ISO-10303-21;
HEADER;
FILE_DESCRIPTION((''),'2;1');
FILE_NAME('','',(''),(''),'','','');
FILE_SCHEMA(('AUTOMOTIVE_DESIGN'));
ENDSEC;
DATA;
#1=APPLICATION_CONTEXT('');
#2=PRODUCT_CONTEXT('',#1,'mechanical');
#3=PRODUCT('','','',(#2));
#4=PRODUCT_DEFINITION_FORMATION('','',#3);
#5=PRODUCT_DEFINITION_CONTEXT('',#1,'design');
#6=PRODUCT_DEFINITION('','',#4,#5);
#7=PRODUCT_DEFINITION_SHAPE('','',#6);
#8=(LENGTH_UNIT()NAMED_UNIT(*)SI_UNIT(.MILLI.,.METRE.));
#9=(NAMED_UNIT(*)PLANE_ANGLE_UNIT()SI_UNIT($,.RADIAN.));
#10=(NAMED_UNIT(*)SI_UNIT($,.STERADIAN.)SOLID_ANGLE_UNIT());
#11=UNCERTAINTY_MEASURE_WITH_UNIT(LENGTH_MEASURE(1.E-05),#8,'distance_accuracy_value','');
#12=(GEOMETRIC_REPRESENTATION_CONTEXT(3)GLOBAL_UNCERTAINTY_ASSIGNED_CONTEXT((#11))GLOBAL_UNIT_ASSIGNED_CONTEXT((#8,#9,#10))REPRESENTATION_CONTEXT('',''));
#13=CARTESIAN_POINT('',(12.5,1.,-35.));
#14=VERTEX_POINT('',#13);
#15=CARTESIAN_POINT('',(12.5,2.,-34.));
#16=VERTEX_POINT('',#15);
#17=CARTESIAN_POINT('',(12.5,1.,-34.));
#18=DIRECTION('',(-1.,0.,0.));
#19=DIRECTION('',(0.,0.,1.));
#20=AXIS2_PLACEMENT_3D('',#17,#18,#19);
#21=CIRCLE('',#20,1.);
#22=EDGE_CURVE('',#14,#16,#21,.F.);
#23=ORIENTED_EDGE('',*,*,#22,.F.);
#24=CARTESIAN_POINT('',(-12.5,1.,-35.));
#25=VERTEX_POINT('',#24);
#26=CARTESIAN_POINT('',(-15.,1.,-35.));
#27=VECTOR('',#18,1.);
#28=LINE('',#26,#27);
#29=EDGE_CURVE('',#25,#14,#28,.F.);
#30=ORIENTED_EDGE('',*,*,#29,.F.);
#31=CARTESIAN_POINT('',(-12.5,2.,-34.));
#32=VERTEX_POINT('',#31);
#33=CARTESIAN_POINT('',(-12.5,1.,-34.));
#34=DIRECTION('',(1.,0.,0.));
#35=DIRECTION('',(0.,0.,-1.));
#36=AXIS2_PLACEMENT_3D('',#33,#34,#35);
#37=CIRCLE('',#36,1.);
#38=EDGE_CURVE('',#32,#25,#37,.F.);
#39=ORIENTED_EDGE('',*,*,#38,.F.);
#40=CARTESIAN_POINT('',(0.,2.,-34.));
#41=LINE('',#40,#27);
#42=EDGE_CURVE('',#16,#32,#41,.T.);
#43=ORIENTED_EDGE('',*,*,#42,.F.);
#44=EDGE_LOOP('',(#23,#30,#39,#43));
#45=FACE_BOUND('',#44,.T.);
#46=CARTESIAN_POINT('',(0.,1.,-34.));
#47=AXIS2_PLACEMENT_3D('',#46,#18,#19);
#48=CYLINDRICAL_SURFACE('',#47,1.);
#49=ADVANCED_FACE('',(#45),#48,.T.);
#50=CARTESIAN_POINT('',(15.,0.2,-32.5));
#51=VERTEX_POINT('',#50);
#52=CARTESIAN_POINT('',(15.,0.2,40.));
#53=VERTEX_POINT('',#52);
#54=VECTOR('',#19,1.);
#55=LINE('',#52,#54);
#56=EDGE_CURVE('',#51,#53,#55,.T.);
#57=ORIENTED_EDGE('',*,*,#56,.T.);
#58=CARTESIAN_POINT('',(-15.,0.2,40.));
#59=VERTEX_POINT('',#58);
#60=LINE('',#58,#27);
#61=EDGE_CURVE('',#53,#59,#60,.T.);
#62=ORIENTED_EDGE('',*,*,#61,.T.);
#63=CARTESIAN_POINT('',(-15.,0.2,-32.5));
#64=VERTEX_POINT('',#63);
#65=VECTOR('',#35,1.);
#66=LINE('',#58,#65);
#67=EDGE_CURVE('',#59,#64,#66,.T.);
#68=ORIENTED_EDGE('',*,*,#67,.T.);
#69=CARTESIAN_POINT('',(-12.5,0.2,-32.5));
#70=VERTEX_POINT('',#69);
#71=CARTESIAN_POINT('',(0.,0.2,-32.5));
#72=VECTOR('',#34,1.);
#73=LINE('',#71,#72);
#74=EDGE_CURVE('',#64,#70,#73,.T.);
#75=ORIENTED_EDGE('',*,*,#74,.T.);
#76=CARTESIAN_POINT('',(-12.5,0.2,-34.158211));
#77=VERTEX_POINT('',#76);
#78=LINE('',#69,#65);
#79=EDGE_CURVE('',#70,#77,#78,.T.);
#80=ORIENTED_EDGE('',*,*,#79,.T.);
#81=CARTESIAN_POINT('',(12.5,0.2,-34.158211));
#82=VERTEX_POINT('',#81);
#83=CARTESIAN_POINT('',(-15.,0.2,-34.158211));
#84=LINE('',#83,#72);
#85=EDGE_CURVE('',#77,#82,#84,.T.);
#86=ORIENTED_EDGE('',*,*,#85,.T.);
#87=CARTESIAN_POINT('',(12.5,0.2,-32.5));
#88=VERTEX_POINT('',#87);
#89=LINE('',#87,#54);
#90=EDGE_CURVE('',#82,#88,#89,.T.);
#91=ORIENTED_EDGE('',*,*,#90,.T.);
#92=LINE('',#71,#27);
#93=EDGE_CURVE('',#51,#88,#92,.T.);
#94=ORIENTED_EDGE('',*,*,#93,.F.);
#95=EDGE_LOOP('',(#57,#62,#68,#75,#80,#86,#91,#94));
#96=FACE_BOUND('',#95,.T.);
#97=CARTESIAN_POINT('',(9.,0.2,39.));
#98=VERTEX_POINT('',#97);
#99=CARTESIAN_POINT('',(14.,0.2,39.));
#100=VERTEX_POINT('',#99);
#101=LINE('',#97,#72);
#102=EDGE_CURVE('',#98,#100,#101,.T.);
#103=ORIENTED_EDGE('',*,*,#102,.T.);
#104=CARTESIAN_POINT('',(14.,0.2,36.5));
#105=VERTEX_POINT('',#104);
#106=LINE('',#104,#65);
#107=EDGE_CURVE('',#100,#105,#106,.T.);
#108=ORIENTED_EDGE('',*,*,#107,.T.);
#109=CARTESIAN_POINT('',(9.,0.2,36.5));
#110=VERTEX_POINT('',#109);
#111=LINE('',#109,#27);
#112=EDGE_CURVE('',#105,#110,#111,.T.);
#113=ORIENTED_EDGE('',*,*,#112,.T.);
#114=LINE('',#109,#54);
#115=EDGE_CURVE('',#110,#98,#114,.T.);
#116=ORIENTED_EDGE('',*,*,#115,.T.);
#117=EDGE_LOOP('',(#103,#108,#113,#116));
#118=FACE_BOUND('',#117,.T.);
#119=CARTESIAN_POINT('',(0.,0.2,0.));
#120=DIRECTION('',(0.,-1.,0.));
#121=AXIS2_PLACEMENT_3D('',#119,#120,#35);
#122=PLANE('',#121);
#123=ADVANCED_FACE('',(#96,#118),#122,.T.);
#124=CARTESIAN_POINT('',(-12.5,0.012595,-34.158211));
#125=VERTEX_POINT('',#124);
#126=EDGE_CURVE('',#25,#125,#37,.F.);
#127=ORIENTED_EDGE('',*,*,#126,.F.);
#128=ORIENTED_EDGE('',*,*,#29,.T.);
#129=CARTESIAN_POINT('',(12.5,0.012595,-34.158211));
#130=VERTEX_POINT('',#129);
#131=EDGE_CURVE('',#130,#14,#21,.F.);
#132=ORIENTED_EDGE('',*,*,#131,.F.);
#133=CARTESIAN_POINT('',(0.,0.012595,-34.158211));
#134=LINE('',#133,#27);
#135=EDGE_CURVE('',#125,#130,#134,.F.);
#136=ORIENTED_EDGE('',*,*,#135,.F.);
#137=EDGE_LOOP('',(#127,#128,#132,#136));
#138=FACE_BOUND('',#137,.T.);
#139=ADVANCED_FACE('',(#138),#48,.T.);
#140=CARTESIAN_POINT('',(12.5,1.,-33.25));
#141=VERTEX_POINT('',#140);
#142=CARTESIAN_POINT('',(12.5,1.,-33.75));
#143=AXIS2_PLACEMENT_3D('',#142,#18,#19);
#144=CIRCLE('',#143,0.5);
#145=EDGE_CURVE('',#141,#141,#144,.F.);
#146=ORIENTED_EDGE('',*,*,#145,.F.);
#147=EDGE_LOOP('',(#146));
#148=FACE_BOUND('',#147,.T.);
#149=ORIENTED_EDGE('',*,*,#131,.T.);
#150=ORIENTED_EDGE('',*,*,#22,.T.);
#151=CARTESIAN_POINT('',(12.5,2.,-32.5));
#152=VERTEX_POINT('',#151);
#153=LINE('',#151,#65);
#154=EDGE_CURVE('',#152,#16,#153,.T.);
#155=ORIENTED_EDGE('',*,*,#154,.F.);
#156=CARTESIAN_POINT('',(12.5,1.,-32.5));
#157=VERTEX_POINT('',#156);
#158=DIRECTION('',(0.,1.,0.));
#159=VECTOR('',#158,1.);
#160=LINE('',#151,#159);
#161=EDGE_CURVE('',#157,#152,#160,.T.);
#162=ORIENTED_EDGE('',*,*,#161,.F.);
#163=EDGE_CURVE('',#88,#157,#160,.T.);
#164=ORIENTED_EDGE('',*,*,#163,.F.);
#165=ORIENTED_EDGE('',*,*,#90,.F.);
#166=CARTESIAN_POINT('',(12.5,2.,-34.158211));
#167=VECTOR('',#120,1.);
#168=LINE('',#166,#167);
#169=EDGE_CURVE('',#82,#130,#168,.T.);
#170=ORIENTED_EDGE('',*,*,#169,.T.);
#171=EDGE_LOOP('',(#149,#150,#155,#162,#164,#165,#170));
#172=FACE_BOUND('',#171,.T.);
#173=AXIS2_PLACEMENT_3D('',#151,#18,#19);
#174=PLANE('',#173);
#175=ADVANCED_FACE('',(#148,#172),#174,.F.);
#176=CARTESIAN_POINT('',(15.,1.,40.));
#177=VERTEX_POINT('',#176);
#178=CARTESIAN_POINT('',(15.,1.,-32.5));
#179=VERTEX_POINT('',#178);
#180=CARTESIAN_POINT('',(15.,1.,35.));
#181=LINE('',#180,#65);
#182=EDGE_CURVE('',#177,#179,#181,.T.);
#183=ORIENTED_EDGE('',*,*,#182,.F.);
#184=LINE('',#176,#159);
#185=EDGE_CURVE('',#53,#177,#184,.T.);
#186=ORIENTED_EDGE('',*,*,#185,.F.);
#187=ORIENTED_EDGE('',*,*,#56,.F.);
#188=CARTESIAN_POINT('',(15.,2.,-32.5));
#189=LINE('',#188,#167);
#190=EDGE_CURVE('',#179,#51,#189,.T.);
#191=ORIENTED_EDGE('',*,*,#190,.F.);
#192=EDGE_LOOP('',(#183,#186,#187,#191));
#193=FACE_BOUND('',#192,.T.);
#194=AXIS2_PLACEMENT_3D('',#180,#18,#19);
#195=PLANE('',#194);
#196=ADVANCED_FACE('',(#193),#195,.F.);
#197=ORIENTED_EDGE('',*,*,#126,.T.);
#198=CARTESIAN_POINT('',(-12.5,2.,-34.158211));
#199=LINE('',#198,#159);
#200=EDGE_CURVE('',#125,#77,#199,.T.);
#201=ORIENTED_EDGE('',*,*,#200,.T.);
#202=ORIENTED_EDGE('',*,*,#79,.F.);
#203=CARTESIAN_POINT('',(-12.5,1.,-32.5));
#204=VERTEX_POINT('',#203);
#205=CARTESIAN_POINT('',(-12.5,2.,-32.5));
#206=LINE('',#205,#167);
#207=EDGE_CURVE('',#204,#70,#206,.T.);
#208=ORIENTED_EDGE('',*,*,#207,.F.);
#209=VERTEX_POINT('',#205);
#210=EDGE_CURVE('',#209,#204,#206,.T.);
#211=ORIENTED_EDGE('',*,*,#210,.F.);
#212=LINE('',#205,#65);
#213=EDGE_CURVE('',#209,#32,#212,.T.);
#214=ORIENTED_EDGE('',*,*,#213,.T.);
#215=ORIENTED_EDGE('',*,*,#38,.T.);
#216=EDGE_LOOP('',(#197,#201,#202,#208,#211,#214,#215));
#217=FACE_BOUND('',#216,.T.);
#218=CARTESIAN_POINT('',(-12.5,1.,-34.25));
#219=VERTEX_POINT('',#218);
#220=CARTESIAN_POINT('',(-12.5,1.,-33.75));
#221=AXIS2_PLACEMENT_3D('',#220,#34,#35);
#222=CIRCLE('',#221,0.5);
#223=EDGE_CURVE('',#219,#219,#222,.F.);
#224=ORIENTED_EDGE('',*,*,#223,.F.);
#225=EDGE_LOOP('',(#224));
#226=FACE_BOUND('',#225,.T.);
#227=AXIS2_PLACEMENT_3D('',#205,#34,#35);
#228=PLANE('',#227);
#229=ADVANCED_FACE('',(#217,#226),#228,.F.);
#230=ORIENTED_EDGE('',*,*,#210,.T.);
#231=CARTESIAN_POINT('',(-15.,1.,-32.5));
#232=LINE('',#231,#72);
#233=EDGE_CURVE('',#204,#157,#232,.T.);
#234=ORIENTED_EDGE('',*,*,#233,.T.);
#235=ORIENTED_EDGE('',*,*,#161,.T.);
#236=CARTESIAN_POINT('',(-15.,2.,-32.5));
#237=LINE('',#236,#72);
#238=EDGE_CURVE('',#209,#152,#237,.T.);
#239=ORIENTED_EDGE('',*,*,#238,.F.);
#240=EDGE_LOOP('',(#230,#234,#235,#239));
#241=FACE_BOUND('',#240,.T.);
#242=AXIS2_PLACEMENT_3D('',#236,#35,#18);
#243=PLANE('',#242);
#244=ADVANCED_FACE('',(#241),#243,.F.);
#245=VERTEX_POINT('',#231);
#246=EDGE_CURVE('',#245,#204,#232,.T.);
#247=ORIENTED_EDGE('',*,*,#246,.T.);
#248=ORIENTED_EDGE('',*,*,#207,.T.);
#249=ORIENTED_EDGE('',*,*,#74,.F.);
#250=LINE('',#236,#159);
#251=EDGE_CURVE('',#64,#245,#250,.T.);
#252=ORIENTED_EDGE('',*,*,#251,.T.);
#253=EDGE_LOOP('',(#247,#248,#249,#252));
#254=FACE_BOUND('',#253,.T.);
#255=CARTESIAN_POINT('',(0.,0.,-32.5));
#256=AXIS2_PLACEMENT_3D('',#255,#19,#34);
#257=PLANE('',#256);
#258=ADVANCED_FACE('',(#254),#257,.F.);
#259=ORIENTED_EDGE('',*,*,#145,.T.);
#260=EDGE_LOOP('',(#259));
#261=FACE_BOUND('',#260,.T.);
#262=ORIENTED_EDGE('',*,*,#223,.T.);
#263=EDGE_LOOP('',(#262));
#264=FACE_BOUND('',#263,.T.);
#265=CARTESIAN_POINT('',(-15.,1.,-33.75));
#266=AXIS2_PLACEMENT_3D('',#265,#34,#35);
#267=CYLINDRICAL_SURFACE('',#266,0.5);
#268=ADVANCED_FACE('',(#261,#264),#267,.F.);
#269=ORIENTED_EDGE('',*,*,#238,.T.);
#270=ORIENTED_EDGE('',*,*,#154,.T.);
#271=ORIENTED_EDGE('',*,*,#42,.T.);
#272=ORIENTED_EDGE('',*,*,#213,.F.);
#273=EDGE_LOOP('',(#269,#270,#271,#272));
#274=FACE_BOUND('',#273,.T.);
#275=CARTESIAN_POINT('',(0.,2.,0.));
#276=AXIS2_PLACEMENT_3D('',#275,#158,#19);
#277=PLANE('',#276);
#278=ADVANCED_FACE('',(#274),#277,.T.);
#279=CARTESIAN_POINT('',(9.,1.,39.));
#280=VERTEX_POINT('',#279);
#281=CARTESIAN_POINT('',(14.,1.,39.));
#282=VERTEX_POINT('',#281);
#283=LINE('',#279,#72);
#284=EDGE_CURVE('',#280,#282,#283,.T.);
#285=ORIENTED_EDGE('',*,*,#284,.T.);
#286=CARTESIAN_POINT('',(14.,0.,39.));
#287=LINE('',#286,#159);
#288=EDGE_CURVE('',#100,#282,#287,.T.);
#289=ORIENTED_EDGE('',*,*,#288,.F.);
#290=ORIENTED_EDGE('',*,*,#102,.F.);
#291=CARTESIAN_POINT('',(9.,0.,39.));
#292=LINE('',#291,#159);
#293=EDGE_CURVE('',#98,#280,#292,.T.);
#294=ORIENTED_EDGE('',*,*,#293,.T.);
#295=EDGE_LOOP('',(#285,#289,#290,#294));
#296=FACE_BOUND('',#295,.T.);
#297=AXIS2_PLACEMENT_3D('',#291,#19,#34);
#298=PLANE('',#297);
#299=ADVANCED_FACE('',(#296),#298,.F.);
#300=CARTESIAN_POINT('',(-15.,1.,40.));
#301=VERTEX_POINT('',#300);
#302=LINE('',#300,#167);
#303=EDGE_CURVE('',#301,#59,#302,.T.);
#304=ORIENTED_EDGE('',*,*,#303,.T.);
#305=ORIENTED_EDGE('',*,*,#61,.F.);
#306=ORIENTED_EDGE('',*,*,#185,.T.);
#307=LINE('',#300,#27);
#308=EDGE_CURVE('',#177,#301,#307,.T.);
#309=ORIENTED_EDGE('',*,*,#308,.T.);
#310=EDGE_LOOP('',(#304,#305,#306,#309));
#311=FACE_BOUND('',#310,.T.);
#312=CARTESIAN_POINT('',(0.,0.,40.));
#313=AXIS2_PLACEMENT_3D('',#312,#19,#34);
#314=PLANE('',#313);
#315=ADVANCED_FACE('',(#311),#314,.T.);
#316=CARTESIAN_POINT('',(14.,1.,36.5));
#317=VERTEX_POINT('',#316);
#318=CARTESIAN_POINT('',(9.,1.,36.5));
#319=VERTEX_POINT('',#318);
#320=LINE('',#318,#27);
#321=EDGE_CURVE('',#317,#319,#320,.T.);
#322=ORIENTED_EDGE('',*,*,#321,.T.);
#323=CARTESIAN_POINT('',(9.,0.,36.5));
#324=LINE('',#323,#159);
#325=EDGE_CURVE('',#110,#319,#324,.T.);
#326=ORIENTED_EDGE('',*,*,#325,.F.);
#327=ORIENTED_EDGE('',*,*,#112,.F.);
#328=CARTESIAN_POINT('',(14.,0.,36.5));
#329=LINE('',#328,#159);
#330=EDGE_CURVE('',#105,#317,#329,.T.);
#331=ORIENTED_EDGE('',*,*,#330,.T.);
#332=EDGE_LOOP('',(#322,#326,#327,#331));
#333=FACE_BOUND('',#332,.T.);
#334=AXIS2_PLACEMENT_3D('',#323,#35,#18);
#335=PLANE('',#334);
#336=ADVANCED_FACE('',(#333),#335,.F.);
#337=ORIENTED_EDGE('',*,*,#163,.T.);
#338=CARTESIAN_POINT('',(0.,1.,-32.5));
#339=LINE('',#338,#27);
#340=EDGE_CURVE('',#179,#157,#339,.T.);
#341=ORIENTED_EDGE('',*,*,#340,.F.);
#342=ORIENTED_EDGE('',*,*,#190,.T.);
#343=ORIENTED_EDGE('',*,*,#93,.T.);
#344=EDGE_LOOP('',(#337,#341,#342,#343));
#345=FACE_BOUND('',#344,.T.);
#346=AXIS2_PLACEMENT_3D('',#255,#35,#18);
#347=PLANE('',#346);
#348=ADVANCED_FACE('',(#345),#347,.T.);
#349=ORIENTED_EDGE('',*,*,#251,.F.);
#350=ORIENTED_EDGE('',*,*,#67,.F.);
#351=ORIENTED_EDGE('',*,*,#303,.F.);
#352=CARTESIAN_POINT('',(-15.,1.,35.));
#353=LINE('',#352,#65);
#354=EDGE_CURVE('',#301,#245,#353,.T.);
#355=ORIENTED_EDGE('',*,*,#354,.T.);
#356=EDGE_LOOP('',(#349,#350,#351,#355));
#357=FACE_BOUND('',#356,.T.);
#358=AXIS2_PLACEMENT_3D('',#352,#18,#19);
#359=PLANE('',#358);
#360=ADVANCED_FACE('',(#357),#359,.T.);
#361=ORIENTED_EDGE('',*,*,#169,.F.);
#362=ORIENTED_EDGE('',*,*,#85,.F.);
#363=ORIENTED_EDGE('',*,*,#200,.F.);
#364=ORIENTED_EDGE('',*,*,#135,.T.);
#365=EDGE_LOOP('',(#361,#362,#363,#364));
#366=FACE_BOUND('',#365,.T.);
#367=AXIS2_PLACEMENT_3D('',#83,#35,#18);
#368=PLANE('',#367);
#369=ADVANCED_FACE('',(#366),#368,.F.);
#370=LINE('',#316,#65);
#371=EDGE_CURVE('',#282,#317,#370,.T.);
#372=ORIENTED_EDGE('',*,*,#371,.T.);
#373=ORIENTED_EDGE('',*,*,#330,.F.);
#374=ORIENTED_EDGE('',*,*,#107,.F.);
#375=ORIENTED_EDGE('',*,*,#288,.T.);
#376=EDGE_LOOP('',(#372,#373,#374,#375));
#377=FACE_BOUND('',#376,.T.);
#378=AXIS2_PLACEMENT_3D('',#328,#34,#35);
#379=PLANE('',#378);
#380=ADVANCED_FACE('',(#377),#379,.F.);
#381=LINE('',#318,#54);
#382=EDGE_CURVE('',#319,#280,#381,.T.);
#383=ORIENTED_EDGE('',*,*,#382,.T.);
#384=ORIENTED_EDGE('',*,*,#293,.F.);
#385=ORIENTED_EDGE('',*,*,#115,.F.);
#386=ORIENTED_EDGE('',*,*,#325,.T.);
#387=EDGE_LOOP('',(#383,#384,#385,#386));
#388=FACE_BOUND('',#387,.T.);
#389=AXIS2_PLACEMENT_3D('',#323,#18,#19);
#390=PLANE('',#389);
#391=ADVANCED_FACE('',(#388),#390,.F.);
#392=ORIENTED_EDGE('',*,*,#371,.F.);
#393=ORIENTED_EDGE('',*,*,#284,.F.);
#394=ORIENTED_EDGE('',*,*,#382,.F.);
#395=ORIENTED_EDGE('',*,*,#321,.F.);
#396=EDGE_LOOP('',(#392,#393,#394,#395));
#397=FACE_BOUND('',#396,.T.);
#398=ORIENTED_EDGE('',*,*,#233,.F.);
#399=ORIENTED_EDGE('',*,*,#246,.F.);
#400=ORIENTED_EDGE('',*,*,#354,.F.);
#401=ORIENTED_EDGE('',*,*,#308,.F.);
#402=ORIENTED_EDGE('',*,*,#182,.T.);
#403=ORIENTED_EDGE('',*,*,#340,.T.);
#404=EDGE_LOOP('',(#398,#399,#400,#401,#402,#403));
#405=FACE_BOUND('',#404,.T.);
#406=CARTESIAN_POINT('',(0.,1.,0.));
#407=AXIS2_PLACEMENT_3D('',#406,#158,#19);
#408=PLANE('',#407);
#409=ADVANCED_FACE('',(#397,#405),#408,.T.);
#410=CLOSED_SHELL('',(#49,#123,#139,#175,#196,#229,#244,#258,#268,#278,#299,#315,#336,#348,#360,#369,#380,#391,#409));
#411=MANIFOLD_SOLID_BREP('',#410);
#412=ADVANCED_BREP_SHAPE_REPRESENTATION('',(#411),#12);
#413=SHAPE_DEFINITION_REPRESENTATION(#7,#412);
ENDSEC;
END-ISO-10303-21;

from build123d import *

# Parameters (mm, degrees)
SKETCH1_W           = 30
SKETCH1_H           = 70
BOSS_EXTRUDE1_DEPTH = 1
SKETCH2_W           = 30
SKETCH2_H           = 2.5
BOSS_EXTRUDE2_DEPTH = 1
SKETCH3_R           = 0.5
CUT_EXTRUDE1_DEPTH  = 30
SKETCH4_W           = 2.5
SKETCH4_H           = 2
CUT_EXTRUDE2_DEPTH  = 2.5
FILLET1_R           = 1
SKETCH5_W           = 30
SKETCH5_H           = 1
BOSS_EXTRUDE3_DEPTH = 5
FILLET2_R           = 1
SKETCH6_W           = 5
SKETCH6_H           = 2.5
CUT_EXTRUDE3_DEPTH  = 1
SKETCH7_W           = 30
SKETCH7_H           = 74.158210877
CUT_EXTRUDE4_DEPTH  = 0.2


with BuildPart() as part:
    # Sketch1 → Boss-Extrude1 (new body)
    with BuildSketch(Plane(origin=(0, 0, 0), x_dir=(1, 0, 0), z_dir=(0, 1, 0))):
        Rectangle(SKETCH1_W, SKETCH1_H)
    extrude(amount=BOSS_EXTRUDE1_DEPTH)

    # Sketch2 → Boss-Extrude2 (add)
    with BuildSketch(Plane(origin=(0, 1, 0), x_dir=(1, 0, 0), z_dir=(0, 1, 0))):
        with Locations((0, 33.75)):
            Rectangle(SKETCH2_W, SKETCH2_H)
    extrude(amount=BOSS_EXTRUDE2_DEPTH)

    # Sketch3 → Cut-Extrude1 (cut)
    with BuildSketch(Plane(origin=(15, 0, 0), x_dir=(0, 0, -1), z_dir=(1, 0, 0))):
        with Locations((33.75, 1)):
            Circle(SKETCH3_R)
    extrude(amount=-CUT_EXTRUDE1_DEPTH, mode=Mode.SUBTRACT)

    # Sketch4 → Cut-Extrude2 (cut)
    with BuildSketch(Plane(origin=(0, 0, -35), x_dir=(-1, 0, 0), z_dir=(0, 0, -1))):
        with Locations((-13.75, 1)):
            Rectangle(SKETCH4_W, SKETCH4_H)
        with Locations((13.75, 1)):
            Rectangle(SKETCH4_W, SKETCH4_H)
    extrude(amount=-CUT_EXTRUDE2_DEPTH, mode=Mode.SUBTRACT)

    # Fillet1
    fillet1_edges = [part.edges().sort_by_distance(p)[0] for p in [
        (0, 2, -35),
    ]]
    fillet(fillet1_edges, radius=FILLET1_R)

    # Sketch5 → Boss-Extrude3 (add)
    with BuildSketch(Plane.XY.offset(35)):
        with Locations((0, 0.5)):
            Rectangle(SKETCH5_W, SKETCH5_H)
    extrude(amount=BOSS_EXTRUDE3_DEPTH)

    # Fillet2
    fillet2_edges = [part.edges().sort_by_distance(p)[0] for p in [
        (0, 0, -35),
    ]]
    fillet(fillet2_edges, radius=FILLET2_R - 0.0001)  # a hair under: the kernel refuses the full size

    # Sketch6 → Cut-Extrude3 (cut)
    with BuildSketch(Plane(origin=(0, 1, 0), x_dir=(1, 0, 0), z_dir=(0, 1, 0))):
        with Locations((11.5, -37.75)):
            Rectangle(SKETCH6_W, SKETCH6_H)
    extrude(amount=-CUT_EXTRUDE3_DEPTH, mode=Mode.SUBTRACT)

    # Sketch7 → Cut-Extrude4 (cut)
    with BuildSketch(Plane.XZ):
        with Locations((0, 2.920894561)):
            Rectangle(SKETCH7_W, SKETCH7_H)
    extrude(amount=-CUT_EXTRUDE4_DEPTH, mode=Mode.SUBTRACT)


solid = part.part
